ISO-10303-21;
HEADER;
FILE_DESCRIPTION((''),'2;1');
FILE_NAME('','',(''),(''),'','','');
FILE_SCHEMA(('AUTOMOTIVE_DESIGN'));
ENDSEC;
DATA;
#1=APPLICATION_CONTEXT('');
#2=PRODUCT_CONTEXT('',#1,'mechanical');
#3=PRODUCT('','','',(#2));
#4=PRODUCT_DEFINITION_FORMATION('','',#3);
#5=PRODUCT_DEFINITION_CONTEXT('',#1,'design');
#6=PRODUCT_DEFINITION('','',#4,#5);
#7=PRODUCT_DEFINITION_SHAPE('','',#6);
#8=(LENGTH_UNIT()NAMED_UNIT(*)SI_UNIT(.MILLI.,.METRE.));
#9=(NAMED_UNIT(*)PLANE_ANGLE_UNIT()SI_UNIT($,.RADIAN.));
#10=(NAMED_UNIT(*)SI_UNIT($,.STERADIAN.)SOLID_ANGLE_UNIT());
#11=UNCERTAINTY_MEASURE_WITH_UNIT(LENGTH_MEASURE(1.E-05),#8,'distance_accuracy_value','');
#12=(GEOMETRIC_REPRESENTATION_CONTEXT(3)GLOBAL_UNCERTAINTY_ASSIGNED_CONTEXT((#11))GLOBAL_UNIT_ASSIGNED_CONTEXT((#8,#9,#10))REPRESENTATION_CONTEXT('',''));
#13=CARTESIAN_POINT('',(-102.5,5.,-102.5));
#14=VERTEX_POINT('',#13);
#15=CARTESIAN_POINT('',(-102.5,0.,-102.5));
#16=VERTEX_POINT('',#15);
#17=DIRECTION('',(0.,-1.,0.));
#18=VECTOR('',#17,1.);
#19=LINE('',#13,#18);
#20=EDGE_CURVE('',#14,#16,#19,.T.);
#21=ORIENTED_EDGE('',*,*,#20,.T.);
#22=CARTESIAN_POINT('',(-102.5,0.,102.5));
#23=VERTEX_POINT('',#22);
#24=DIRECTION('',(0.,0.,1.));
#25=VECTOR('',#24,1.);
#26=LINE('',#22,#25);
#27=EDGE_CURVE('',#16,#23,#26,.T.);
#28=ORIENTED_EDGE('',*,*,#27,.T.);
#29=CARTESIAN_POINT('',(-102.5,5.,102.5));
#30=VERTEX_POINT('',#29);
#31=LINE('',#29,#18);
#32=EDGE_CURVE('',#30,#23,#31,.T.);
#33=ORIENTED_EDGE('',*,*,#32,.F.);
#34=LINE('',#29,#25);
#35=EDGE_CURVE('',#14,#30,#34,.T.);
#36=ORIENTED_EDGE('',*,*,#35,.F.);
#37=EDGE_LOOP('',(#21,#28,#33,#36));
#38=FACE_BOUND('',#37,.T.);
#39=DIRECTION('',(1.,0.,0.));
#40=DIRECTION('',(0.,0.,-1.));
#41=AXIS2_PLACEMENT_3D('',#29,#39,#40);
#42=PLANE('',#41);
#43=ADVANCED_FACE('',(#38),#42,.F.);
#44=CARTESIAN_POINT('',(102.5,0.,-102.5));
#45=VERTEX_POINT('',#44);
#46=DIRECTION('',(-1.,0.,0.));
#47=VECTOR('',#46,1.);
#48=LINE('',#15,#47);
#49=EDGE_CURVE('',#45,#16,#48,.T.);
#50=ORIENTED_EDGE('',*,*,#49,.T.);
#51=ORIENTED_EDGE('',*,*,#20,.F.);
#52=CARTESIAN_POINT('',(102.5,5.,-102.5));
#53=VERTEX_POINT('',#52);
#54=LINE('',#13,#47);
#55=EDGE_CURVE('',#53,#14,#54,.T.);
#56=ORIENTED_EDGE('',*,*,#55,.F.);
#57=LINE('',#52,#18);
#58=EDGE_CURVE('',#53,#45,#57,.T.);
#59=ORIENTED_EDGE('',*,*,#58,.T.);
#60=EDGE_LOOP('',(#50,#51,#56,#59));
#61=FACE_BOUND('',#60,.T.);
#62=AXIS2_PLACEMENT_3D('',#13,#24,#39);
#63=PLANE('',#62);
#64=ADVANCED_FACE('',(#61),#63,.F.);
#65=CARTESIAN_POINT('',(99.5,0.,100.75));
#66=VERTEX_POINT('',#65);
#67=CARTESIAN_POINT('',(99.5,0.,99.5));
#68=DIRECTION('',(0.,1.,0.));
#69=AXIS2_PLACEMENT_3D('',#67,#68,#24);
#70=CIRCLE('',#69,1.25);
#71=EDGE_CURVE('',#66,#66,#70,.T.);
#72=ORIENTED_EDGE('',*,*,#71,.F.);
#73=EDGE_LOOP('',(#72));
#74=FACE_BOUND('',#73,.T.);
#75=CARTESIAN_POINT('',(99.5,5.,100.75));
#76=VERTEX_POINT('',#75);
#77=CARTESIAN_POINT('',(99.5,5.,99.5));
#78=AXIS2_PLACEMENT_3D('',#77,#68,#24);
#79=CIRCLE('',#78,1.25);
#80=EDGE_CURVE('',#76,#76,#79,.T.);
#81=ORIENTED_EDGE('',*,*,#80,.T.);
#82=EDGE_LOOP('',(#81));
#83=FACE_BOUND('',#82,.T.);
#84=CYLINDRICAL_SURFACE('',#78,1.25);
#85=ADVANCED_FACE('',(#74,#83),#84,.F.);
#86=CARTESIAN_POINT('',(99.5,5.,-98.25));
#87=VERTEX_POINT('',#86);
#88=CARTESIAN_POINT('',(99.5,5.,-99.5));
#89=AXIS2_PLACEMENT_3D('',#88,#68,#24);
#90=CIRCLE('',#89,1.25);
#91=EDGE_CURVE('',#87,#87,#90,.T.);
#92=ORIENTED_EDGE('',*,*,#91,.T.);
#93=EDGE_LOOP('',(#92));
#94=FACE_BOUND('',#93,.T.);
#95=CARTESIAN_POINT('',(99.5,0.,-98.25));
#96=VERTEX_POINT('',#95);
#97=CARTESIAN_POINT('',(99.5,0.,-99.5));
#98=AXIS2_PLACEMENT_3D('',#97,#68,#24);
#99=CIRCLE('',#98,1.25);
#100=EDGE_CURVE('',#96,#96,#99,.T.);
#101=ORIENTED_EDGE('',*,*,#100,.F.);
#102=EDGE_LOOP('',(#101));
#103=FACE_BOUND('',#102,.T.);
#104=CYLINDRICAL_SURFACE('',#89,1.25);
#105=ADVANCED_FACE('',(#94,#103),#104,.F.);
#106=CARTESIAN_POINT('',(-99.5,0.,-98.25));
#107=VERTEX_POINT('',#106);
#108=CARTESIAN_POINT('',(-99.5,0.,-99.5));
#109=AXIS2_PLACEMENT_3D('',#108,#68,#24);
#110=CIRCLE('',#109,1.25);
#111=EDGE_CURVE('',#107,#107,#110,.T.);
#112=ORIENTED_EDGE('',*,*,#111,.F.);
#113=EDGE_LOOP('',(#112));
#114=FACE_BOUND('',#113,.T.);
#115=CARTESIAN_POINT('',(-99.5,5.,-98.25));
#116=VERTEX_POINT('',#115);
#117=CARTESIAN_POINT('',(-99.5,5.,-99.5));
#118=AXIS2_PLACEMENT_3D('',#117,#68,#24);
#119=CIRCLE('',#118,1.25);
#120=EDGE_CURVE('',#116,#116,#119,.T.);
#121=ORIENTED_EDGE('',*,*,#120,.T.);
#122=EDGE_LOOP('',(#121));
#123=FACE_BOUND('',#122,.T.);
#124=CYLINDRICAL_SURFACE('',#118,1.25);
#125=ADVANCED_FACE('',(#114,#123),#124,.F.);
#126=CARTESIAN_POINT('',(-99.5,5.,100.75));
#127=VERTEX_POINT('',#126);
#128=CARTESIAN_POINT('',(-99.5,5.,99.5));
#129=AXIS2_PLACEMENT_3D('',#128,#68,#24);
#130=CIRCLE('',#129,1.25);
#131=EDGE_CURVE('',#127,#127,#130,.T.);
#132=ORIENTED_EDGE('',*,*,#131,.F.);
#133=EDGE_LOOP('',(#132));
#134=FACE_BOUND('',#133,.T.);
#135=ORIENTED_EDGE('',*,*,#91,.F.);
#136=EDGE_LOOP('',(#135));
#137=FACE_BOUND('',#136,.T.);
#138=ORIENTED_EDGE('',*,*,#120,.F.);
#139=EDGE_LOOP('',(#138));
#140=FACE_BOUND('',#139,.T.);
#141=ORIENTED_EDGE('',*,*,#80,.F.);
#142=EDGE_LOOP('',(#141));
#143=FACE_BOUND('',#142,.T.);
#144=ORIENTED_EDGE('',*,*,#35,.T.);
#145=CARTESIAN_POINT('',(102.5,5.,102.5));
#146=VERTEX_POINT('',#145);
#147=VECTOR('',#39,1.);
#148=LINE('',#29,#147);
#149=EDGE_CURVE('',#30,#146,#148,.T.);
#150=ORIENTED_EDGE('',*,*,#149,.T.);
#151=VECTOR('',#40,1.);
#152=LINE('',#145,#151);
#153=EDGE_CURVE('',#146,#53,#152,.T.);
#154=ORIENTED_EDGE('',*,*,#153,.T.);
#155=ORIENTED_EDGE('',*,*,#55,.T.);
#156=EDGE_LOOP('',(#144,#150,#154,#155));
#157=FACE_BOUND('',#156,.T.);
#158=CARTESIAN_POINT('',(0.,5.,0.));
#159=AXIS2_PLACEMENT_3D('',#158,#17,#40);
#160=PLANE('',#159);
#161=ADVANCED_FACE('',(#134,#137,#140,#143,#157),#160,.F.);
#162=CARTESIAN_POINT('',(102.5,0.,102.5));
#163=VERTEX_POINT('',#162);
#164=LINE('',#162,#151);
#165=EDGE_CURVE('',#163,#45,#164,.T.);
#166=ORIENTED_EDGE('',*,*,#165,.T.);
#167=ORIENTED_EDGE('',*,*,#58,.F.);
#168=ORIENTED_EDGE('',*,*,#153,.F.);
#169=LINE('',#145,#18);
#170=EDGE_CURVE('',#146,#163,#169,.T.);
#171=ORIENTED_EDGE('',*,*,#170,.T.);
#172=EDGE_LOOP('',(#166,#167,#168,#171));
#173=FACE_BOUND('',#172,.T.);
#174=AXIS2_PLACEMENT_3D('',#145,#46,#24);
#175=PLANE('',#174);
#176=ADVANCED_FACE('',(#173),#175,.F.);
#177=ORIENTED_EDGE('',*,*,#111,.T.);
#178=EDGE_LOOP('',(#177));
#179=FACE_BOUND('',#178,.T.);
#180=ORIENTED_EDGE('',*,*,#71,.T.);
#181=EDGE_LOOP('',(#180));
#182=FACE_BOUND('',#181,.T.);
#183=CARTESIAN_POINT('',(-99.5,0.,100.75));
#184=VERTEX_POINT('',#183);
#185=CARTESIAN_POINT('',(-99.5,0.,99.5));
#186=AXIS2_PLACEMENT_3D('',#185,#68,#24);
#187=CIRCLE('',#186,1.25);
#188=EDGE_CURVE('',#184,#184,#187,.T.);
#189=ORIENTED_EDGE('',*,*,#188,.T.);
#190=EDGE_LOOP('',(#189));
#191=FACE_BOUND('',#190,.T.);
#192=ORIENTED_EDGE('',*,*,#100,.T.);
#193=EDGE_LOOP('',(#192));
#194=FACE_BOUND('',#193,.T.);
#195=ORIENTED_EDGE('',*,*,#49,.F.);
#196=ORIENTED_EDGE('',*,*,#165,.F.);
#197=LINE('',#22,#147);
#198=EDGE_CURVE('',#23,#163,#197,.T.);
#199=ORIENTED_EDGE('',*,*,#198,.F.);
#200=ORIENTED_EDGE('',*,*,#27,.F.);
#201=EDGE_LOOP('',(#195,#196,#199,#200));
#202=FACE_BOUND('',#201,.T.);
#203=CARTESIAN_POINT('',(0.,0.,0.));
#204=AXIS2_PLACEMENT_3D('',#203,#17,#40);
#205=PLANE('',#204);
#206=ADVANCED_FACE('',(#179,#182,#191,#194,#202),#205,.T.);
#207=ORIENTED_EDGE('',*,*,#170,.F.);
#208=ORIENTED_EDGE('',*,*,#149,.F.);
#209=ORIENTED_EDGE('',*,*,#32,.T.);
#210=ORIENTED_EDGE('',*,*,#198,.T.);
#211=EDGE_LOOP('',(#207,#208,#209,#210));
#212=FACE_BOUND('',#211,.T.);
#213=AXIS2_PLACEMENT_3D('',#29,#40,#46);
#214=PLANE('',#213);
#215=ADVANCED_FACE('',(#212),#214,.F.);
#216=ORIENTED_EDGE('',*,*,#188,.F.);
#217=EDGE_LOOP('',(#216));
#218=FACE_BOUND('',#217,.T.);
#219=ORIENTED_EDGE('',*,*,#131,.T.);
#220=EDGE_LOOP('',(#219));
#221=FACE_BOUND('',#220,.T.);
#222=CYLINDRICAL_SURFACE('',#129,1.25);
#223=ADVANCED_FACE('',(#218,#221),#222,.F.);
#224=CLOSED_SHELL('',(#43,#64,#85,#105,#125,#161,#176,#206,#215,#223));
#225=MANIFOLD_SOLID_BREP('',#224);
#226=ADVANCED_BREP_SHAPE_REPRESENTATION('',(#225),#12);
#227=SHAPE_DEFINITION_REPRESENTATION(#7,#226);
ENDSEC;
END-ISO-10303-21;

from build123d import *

# Parameters (mm, degrees)
SKETCH1_W                           = 205
SKETCH1_H                           = 205
BOSS_EXTRUDE1_DEPTH                 = 5
TAP_DRILL_FOR_M3X0_5_TAP1_OUTLINE_R = 1.25
TAP_DRILL_FOR_M3X0_5_TAP1_DEPTH     = 5


# Read off the part's stored shape, not the designer's step: Tap Drill for M3x0.5 Tap1
with BuildPart() as part:
    # Sketch1 → Boss-Extrude1 (new body)
    with BuildSketch(Plane(origin=(0, 0, 0), x_dir=(1, 0, 0), z_dir=(0, 1, 0))):
        Rectangle(SKETCH1_W, SKETCH1_H)
    extrude(amount=BOSS_EXTRUDE1_DEPTH)

    # Tap Drill for M3x0.5 Tap1 outline → Tap Drill for M3x0.5 Tap1 (cut)
    with BuildSketch(Plane(origin=(0, 0, 0), x_dir=(1, 0, 0), z_dir=(0, 1, 0))):
        with Locations((99.5, 99.5)):
            Circle(TAP_DRILL_FOR_M3X0_5_TAP1_OUTLINE_R)
        with Locations((-99.5, -99.5)):
            Circle(TAP_DRILL_FOR_M3X0_5_TAP1_OUTLINE_R)
        with Locations((99.5, -99.5)):
            Circle(TAP_DRILL_FOR_M3X0_5_TAP1_OUTLINE_R)
        with Locations((-99.5, 99.5)):
            Circle(TAP_DRILL_FOR_M3X0_5_TAP1_OUTLINE_R)
    extrude(amount=TAP_DRILL_FOR_M3X0_5_TAP1_DEPTH, mode=Mode.SUBTRACT)


solid = part.part
